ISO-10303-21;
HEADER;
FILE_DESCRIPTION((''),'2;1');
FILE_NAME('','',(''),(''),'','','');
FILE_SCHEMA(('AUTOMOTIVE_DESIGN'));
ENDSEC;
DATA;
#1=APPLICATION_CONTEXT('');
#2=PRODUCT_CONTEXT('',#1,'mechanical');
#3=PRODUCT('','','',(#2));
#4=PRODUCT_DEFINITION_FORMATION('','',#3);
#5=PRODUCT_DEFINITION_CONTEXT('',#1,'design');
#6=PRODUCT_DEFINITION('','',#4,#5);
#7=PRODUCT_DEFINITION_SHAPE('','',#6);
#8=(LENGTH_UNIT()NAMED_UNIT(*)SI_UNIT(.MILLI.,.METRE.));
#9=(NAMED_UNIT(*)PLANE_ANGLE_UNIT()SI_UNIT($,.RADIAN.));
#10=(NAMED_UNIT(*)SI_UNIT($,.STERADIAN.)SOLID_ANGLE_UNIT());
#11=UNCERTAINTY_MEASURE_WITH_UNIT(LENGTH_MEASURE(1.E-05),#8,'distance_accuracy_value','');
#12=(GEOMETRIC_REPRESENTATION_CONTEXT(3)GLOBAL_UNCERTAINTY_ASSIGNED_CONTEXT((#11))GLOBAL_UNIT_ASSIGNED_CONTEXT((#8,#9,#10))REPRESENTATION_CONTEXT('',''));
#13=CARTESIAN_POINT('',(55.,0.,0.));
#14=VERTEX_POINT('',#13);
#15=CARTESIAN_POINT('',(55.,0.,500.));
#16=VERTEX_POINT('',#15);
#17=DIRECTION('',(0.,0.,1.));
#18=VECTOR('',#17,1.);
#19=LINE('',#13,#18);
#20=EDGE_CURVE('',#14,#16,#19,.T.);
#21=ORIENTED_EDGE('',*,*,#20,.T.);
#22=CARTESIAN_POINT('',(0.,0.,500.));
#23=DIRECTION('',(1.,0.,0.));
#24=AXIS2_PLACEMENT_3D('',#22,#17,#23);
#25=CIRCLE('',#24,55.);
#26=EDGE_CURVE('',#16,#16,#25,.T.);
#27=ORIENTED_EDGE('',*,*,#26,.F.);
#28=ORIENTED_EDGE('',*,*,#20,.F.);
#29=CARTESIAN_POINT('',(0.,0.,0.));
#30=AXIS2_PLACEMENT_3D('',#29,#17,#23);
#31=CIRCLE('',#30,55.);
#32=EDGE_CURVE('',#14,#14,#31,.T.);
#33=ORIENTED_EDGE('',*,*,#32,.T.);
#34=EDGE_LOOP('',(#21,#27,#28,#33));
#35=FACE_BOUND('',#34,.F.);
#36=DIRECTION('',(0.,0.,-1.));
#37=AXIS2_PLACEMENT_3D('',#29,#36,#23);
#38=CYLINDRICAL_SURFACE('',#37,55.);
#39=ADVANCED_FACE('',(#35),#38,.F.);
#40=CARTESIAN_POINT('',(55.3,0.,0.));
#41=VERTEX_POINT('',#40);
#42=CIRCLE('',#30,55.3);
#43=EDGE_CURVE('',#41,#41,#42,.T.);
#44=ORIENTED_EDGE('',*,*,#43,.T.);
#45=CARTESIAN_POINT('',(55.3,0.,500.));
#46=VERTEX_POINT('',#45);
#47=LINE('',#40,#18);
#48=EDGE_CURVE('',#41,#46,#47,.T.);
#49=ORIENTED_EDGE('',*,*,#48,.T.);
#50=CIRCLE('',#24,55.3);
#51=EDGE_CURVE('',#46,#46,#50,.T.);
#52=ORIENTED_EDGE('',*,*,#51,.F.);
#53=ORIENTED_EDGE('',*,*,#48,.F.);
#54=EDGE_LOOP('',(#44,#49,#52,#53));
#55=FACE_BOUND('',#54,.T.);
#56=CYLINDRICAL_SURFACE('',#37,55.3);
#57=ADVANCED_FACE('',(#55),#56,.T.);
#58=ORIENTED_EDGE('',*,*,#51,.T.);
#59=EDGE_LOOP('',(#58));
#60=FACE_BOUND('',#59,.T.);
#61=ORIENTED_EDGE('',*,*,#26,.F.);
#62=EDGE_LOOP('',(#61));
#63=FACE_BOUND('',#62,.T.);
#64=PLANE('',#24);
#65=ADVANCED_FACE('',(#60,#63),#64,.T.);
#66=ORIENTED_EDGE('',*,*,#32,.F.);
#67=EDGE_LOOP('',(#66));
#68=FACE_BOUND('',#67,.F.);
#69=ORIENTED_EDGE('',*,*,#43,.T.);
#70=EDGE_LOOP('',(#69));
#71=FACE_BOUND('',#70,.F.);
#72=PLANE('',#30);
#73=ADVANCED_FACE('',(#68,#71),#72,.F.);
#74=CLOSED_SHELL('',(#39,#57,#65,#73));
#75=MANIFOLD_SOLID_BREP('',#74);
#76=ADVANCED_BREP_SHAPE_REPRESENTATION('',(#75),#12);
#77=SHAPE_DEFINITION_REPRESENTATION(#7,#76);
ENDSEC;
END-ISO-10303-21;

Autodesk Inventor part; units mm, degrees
ref_plane "YZ Plane" through (0, 0, 0) normal (1, 0, 0) x (0, 1, 0)
ref_plane "XZ Plane" through (0, 0, 0) normal (0, 1, 0) x (-1, 0, 0)
ref_plane "XY Plane" through (0, 0, 0) normal (0, 0, 1) x (1, 0, 0)
sketch "Sketch1" plane through (0, 0, 0) normal (0, 0, 1) x (1, 0, 0)
  circle A0 centre (0, 0) radius 55
  circle A1 centre (0, 0) radius 55.3
  dimension "d0" = 110
  dimension "d1" = 0.3
extrude "Extrusion1" add sketch "Sketch1" along normal blind 500
properties part number "Coil" material "Copper"
